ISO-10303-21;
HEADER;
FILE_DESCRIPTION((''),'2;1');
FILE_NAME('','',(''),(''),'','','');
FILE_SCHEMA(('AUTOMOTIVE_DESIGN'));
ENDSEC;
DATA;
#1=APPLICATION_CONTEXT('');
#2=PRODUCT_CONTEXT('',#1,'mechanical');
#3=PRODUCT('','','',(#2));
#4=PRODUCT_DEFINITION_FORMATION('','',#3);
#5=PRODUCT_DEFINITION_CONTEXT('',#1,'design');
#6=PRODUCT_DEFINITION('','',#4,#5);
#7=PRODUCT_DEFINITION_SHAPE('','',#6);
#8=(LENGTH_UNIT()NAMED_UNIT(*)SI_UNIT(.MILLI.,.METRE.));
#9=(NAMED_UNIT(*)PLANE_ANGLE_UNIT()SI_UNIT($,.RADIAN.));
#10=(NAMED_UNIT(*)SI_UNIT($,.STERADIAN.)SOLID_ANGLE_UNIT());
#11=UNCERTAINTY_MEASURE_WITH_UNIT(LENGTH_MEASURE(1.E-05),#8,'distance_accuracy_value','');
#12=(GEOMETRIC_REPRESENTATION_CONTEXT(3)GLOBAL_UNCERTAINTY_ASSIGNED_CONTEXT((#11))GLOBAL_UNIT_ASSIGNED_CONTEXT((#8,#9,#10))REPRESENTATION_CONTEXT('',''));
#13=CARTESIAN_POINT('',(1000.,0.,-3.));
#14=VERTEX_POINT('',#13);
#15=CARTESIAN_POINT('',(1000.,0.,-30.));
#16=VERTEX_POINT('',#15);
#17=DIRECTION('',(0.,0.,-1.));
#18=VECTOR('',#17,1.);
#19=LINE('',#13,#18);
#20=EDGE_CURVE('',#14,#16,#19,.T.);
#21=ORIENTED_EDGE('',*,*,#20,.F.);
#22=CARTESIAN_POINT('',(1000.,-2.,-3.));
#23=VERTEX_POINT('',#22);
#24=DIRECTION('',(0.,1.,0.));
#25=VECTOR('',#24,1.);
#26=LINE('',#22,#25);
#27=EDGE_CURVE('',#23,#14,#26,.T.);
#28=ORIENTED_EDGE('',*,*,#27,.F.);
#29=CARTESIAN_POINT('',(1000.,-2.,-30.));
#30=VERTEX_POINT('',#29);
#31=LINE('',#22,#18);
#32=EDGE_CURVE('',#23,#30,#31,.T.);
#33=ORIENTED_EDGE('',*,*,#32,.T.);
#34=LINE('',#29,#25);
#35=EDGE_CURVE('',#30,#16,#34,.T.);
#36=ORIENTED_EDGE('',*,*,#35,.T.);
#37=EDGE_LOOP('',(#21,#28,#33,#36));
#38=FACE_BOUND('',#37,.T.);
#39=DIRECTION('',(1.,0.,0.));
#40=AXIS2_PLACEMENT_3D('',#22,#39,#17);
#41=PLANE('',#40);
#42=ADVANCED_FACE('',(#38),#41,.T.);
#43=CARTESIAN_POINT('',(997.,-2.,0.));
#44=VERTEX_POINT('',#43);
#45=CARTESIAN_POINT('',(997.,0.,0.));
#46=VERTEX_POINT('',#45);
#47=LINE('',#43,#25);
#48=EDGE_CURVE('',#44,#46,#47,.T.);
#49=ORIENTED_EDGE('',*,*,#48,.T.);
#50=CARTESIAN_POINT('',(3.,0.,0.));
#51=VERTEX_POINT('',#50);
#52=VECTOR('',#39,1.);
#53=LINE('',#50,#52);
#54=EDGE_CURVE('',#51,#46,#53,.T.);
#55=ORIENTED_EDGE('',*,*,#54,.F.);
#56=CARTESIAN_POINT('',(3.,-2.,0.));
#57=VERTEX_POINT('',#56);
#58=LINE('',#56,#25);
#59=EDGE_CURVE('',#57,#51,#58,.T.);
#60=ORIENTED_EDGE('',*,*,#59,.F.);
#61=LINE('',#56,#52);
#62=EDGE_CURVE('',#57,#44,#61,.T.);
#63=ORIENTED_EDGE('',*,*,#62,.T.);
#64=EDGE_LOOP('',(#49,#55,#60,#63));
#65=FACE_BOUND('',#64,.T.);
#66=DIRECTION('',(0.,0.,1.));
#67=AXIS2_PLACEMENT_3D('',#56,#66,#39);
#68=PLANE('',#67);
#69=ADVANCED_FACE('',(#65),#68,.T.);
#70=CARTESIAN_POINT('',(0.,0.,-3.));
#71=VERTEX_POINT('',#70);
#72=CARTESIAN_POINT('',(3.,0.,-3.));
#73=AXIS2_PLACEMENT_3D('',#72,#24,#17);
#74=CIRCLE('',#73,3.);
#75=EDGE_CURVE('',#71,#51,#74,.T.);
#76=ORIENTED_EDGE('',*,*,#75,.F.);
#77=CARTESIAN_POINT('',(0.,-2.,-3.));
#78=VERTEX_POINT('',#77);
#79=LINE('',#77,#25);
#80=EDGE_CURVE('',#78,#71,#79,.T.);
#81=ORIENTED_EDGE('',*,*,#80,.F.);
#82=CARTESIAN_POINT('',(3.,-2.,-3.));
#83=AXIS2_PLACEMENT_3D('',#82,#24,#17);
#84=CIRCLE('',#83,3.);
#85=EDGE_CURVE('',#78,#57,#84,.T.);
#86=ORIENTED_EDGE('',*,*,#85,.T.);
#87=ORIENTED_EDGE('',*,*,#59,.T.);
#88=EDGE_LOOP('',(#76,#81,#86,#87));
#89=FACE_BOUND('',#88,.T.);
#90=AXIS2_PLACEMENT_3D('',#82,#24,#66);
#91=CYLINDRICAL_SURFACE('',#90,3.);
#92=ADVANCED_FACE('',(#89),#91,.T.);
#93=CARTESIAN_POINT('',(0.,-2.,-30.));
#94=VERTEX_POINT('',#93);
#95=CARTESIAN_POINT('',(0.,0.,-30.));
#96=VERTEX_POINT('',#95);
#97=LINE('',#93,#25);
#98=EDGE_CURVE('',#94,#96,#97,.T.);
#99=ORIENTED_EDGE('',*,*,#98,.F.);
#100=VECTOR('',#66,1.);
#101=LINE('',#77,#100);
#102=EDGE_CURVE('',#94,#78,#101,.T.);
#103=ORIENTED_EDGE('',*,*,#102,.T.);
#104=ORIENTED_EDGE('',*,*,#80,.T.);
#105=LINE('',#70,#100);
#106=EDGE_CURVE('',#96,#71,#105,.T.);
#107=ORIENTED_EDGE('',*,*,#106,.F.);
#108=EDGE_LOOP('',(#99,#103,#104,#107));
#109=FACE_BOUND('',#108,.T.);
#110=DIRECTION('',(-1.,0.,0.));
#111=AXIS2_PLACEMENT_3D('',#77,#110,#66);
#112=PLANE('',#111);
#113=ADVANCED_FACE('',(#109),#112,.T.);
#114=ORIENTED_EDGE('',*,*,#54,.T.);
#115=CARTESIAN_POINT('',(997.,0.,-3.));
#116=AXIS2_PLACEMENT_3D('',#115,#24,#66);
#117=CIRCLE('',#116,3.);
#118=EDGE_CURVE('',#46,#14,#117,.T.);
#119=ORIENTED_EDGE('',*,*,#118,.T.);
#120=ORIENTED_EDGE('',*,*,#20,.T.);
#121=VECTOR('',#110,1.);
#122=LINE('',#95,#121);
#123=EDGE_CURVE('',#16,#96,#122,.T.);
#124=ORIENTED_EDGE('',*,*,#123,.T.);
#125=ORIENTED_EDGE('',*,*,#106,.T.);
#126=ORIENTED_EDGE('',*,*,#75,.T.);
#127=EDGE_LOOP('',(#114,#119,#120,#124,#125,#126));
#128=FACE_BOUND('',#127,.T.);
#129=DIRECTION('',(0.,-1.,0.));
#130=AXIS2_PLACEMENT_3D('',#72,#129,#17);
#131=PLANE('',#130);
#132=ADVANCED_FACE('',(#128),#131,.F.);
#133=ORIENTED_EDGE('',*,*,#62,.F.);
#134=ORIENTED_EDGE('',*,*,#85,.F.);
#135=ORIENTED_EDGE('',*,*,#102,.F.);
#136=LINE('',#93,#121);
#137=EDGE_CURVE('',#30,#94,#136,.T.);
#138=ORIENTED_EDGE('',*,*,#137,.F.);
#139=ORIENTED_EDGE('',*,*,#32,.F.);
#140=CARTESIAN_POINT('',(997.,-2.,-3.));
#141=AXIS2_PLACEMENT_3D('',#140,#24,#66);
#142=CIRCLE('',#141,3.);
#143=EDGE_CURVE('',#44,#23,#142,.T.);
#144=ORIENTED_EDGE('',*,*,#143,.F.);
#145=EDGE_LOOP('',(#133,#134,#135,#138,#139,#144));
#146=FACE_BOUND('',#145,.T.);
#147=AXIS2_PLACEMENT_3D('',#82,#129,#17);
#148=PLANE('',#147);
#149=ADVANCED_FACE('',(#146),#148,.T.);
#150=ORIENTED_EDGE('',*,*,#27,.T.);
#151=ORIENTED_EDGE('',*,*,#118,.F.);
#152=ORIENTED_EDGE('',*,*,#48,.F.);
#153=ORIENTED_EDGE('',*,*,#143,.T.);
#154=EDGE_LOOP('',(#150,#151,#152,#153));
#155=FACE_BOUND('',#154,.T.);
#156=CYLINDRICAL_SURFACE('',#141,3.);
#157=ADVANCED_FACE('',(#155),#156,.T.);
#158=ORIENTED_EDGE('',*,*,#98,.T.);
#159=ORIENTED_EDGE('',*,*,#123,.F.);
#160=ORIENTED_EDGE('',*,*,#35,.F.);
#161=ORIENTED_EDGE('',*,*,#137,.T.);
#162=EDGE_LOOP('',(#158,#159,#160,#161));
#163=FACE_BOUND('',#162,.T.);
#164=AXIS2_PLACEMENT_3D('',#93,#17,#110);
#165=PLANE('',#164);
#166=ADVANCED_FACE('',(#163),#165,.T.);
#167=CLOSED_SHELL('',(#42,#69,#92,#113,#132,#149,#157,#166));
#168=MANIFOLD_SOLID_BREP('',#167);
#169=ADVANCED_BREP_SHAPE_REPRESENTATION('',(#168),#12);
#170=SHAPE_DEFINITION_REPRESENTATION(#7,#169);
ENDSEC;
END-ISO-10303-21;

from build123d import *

# Parameters (mm, degrees)
SM_BASE_FLANGE_1_DEPTH = 2


# Sheet-metal steps are written as plain solids
with BuildPart() as part:
    # Sketch 1 → Базовая кромка1 (new body)
    with BuildSketch(Plane(origin=(0, 0, 0), x_dir=(1, 0, 0), z_dir=(0, 1, 0))):
        with BuildLine():
            Line((3, 0), (997, 0))
            ThreePointArc((997, 0), (999.121320344, 0.878679656), (1000, 3))
            Line((1000, 3), (1000, 30))
            Line((1000, 30), (0, 30))
            Line((0, 30), (0, 3))
            ThreePointArc((0, 3), (0.878679656, 0.878679656), (3, 0))
        make_face()
    extrude(amount=-SM_BASE_FLANGE_1_DEPTH)


solid = part.part
